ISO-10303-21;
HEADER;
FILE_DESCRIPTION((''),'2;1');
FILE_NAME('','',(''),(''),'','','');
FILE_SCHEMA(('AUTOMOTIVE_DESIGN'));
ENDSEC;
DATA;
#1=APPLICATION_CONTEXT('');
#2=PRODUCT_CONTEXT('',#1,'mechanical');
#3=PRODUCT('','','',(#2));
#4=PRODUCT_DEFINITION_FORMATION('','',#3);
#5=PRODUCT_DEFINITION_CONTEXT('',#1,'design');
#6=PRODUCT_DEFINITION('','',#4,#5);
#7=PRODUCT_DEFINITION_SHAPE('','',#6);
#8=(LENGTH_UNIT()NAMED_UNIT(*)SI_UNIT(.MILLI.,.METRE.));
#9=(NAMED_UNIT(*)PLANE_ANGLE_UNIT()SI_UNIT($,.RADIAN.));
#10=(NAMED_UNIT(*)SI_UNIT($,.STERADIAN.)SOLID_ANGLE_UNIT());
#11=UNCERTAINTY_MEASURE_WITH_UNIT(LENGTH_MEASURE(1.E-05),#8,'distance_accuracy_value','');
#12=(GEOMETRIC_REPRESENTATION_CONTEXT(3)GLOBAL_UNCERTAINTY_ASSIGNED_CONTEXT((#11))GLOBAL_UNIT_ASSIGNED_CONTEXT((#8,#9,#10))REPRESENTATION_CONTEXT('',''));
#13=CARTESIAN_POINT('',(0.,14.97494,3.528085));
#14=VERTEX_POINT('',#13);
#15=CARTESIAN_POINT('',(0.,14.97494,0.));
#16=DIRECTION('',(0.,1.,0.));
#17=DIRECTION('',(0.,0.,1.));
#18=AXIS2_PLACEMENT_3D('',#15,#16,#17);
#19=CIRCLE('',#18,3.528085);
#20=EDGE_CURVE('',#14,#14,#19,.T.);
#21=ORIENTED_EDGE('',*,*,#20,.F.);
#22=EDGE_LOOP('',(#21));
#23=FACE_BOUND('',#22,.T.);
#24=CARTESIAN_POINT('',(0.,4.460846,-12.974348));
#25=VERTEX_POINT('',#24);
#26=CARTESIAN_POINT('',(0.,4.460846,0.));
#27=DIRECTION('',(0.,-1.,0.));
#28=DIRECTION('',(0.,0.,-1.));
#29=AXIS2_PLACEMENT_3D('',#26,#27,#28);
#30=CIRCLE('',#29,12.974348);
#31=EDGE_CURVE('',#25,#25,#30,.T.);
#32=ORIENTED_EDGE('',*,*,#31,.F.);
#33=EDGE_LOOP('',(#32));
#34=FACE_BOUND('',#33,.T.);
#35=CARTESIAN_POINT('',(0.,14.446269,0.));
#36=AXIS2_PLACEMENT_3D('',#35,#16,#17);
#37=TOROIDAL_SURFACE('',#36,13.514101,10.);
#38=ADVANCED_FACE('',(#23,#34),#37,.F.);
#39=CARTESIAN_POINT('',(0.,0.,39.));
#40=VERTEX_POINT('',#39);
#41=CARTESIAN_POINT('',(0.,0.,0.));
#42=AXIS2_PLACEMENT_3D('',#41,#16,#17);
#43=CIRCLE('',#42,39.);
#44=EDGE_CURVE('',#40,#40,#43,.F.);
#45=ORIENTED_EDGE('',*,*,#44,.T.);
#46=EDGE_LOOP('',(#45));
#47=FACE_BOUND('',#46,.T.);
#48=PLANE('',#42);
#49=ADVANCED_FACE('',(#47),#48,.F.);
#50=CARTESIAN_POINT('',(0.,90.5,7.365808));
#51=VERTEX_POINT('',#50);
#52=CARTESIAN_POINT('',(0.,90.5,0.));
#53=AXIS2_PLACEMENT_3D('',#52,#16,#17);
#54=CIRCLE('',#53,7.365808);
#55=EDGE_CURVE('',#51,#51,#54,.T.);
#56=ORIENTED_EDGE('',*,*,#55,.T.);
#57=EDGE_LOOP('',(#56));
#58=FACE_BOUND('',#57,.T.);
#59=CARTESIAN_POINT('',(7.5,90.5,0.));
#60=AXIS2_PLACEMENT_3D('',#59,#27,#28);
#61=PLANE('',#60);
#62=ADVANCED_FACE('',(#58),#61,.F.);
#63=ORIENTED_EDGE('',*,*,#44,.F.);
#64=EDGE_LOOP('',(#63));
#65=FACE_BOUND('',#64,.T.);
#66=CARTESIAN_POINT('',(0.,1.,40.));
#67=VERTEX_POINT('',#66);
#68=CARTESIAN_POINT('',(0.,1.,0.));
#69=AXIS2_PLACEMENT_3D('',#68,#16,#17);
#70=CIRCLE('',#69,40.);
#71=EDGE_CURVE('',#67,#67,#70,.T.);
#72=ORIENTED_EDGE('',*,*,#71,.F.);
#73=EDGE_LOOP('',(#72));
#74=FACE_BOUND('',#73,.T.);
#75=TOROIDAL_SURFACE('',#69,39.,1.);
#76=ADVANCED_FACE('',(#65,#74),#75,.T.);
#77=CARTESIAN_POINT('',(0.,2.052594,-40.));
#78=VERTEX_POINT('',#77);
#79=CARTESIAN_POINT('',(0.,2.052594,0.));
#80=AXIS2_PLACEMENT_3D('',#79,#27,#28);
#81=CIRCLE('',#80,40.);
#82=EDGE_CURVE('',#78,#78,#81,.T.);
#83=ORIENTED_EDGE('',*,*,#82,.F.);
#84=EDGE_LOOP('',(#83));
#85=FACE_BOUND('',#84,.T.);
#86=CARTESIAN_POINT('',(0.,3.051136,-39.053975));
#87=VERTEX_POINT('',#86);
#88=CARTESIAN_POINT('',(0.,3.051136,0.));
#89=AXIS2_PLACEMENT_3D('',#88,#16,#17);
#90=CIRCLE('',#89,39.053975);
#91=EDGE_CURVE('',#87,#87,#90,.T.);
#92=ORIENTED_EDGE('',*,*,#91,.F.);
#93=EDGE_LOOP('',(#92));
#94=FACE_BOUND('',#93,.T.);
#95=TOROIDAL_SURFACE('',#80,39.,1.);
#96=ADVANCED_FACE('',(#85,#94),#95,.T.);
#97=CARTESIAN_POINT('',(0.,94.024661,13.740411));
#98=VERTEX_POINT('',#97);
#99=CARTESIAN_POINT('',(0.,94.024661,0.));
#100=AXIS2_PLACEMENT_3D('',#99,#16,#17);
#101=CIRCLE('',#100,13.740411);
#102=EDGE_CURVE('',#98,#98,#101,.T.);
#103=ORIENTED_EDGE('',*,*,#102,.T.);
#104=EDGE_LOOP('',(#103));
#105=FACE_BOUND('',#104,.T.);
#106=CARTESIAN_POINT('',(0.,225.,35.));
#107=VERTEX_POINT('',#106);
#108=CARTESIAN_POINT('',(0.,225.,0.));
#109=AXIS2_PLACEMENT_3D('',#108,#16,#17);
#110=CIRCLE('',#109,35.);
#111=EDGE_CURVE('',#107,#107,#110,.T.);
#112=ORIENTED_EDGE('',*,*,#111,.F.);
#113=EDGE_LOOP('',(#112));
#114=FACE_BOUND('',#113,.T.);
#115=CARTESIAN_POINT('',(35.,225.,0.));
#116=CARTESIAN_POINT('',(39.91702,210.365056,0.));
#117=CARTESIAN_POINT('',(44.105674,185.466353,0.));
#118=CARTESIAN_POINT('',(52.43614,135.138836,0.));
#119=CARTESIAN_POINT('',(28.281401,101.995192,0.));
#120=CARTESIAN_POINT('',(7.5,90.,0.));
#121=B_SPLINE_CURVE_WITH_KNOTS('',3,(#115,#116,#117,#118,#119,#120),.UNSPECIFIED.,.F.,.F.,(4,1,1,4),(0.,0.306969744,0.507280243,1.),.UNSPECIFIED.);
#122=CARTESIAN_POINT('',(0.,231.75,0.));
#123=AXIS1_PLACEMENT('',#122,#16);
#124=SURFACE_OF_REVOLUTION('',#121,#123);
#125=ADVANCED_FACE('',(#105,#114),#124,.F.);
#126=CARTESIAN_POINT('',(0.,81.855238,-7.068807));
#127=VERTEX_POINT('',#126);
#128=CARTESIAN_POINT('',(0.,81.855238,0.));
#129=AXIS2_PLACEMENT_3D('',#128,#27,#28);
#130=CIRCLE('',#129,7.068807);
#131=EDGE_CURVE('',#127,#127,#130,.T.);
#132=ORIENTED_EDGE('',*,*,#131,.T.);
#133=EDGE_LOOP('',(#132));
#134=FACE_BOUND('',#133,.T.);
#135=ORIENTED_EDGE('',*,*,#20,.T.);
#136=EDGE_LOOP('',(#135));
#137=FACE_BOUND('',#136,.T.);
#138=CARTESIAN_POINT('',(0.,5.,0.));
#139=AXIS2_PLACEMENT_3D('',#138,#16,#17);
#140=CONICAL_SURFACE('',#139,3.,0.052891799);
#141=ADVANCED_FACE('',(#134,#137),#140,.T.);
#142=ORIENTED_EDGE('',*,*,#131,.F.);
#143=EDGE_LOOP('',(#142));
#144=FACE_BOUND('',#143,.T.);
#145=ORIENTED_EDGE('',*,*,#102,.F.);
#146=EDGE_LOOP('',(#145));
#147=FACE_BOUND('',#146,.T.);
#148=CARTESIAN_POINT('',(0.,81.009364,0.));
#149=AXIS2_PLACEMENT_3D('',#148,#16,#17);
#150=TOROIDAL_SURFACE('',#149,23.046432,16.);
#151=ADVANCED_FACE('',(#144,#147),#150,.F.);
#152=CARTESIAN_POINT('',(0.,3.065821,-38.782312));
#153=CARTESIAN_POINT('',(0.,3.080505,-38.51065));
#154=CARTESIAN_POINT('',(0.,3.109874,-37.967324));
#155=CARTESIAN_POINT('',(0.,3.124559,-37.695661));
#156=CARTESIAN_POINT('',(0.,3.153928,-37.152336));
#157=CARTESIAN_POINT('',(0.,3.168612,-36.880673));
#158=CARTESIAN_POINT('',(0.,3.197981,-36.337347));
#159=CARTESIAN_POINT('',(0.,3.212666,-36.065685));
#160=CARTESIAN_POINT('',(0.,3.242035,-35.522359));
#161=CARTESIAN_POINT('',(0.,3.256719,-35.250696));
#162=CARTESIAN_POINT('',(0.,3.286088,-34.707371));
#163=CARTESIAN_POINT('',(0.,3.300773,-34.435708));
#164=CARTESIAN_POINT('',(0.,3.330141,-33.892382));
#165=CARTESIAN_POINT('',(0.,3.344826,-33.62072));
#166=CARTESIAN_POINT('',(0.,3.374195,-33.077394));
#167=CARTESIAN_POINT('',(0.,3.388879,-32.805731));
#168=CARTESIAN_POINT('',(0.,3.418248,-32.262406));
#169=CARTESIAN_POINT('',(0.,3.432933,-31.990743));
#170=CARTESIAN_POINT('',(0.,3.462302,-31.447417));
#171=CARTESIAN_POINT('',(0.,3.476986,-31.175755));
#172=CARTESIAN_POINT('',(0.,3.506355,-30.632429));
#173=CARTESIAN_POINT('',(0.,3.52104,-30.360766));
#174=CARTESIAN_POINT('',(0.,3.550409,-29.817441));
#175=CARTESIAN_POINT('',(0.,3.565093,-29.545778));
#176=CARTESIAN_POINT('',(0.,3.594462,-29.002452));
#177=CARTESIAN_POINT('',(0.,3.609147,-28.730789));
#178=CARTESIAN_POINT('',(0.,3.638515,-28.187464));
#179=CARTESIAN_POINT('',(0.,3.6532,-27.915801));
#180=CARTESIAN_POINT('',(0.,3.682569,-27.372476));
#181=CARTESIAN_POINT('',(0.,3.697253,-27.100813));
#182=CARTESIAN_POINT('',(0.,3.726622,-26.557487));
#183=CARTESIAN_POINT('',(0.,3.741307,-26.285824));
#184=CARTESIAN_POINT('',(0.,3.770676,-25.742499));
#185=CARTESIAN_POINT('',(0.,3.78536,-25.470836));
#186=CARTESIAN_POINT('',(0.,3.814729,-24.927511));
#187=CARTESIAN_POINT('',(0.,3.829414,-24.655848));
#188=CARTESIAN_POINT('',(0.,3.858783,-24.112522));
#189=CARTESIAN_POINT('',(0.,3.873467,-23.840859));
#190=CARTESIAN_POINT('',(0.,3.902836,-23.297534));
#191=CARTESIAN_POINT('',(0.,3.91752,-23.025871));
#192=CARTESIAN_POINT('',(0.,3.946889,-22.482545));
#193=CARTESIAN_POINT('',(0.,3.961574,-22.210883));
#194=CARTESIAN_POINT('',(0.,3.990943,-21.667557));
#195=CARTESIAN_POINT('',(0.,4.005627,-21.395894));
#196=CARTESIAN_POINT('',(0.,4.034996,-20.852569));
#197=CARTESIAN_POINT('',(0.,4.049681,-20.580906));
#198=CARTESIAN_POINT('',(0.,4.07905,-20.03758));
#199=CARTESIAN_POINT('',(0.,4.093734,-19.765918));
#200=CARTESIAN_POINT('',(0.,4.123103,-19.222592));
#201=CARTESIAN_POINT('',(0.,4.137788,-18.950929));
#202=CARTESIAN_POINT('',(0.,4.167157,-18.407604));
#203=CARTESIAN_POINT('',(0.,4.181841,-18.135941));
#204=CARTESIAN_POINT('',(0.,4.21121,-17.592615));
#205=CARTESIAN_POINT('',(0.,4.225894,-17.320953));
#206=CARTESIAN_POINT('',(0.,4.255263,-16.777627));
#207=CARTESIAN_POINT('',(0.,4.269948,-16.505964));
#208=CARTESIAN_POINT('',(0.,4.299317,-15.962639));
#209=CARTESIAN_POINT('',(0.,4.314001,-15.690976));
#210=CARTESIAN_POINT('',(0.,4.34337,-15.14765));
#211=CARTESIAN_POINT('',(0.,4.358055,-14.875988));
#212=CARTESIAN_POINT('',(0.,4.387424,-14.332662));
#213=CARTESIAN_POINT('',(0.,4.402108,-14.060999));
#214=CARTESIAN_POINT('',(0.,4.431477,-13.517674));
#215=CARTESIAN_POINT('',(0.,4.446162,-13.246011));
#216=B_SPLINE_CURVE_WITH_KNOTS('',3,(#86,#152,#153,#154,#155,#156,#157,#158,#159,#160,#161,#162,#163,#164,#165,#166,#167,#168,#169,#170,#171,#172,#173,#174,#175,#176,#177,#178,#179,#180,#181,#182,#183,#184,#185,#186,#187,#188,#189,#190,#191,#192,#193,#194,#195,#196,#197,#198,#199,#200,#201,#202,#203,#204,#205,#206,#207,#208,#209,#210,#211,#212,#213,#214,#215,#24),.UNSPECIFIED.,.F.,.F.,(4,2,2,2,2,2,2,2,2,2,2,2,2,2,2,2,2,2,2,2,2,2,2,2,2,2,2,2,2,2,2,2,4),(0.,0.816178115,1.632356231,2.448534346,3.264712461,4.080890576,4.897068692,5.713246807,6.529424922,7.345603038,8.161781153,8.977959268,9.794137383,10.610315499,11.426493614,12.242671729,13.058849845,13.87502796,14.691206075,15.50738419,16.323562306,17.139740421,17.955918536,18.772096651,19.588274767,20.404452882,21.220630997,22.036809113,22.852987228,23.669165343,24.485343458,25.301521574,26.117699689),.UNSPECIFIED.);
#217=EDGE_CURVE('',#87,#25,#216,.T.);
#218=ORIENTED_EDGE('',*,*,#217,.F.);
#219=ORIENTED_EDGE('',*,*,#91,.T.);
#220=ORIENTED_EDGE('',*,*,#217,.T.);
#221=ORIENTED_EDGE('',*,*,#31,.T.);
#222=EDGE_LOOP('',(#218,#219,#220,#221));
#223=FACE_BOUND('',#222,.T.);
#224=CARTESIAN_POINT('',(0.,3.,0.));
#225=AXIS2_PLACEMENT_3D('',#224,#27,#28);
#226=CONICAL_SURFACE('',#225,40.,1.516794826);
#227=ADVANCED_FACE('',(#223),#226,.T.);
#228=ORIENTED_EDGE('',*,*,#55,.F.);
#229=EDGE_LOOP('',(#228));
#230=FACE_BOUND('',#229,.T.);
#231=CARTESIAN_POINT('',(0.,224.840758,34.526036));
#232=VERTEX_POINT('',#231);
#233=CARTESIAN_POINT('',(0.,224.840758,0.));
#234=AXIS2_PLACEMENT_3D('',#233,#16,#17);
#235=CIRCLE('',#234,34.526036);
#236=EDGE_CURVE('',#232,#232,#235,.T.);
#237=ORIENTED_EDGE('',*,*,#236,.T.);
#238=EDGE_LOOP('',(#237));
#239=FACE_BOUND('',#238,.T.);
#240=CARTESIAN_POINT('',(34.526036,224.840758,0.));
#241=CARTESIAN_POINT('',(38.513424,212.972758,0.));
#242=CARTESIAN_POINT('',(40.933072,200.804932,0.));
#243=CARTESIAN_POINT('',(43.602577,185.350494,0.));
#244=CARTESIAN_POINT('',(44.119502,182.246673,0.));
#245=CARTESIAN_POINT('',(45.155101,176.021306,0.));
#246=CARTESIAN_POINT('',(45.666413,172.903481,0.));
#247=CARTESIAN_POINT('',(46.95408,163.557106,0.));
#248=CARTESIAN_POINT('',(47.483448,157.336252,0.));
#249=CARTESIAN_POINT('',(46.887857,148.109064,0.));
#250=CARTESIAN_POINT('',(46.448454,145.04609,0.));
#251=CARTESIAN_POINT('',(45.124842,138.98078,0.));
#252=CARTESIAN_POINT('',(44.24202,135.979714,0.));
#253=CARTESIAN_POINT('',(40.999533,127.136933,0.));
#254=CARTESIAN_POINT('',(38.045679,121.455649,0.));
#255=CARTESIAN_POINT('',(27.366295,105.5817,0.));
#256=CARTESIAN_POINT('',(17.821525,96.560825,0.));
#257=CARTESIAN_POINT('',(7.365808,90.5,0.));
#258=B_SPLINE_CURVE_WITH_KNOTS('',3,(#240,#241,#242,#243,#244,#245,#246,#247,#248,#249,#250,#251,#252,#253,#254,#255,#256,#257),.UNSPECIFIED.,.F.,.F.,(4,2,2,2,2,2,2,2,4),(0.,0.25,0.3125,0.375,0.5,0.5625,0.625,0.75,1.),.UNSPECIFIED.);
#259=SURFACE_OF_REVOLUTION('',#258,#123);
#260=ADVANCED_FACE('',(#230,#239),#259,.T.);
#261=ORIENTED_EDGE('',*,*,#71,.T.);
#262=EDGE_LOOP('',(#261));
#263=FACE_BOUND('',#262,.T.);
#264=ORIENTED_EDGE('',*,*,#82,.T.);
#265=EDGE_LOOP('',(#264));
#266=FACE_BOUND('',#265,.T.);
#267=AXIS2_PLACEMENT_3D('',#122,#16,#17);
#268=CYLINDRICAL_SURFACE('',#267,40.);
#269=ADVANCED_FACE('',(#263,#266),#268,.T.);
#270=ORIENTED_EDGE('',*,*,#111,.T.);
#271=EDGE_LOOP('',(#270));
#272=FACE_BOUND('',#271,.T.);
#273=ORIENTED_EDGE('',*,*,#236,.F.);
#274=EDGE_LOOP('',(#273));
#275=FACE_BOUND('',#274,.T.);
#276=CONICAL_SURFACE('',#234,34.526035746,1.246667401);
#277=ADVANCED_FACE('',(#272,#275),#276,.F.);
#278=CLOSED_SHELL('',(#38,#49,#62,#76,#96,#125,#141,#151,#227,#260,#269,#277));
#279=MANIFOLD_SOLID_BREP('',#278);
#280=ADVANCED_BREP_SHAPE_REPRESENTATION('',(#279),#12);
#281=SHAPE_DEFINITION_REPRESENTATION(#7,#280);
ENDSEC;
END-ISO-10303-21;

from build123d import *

# Parameters (mm, degrees)
REVOLVE_THIN1_OUTLINE_W   = 7.365807556
REVOLVE_THIN1_OUTLINE_H   = 0.5
REVOLVE_THIN1_OUTLINE_W_2 = 0.134192444
FILLET1_R                 = 10
FILLET2_R                 = 16
FILLET3_R                 = 1


# Read off the part's stored shape, not the designer's step: Revolve-Thin1
with BuildPart() as part:
    # Revolve-Thin1 outline → Revolve-Thin1 (revolve)
    with BuildSketch(Plane.XY):
        with Locations((3.682903778, 90.25)):
            Rectangle(REVOLVE_THIN1_OUTLINE_W, REVOLVE_THIN1_OUTLINE_H)
        with BuildLine():
            add(Edge.make_bspline(
                [(7.5, 90.577978433), (7.455285949, 90.551931479), (7.410555095, 90.525938631), (7.365807556, 90.5)],
                knots=[0.99893007, 0.99893007, 0.99893007, 0.99893007, 1, 1, 1, 1], degree=3))
            Line((7.365807556, 90.5), (7.5, 90.5))
            Line((7.5, 90.5), (7.5, 90.577978433))
        make_face()
        with Locations((7.432903778, 90.25)):
            Rectangle(REVOLVE_THIN1_OUTLINE_W_2, REVOLVE_THIN1_OUTLINE_H)
        with BuildLine():
            add(Edge.make_bspline(
                [(34.526035746, 116.224068176), (34.512660612, 116.204150697), (34.499276892, 116.184238728), (27.396765127, 105.626990517), (17.903178429, 96.638067113), (7.5, 90.577978433)],
                knots=[0.749529738, 0.749529738, 0.749529738, 0.749529738, 0.75, 0.75, 0.99893007, 0.99893007, 0.99893007, 0.99893007], degree=3))
            Line((7.5, 90.577978433), (7.5, 90.5))
            Line((7.5, 90.5), (8.352912818, 90.5))
            add(Edge.make_bspline(
                [(34.526035746, 115.332949182), (27.575400822, 105.173919249), (18.409466047, 96.486433496), (8.352912818, 90.5)],
                knots=[0.753639532, 0.753639532, 0.753639532, 0.753639532, 0.993242921, 0.993242921, 0.993242921, 0.993242921], degree=3))
            Line((34.526035746, 115.332949182), (34.526035746, 116.224068176))
        make_face()
        with BuildLine():
            Line((8.352912818, 90.5), (7.5, 90.5))
            Line((7.5, 90.5), (7.5, 90))
            add(Edge.make_bspline(
                [(8.352912818, 90.5), (8.069306953, 90.331175989), (7.784992776, 90.16450013), (7.5, 90)],
                knots=[0.993242921, 0.993242921, 0.993242921, 0.993242921, 1, 1, 1, 1], degree=3))
        make_face()
        with BuildLine():
            add(Edge.make_bspline(
                [(35, 116.937654659), (34.843239639, 116.699022317), (34.685245979, 116.461154885), (34.526035746, 116.224068176)],
                knots=[0.743931995, 0.743931995, 0.743931995, 0.743931995, 0.749529738, 0.749529738, 0.749529738, 0.749529738], degree=3))
            Line((34.526035746, 116.224068176), (34.526035746, 115.332949182))
            add(Edge.make_bspline(
                [(35, 116.033110225), (34.843184029, 115.798961501), (34.685190644, 115.565569566), (34.526035746, 115.332949182)],
                knots=[0.748153119, 0.748153119, 0.748153119, 0.748153119, 0.753639532, 0.753639532, 0.753639532, 0.753639532], degree=3))
            Line((35, 116.033110225), (35, 116.937654659))
        make_face()
        with BuildLine():
            add(Edge.make_bspline(
                [(35, 223.406176232), (38.707754789, 211.992882418), (41.019034398, 200.307274966), (43.602577081, 185.350494264), (44.119501526, 182.246673107), (45.155101131, 176.021305771), (45.666413266, 172.90348054), (46.954080187, 163.557105891), (47.483447687, 157.336251858), (46.887857201, 148.10906378), (46.448454036, 145.046089868), (45.124841561, 138.98077957), (44.242019923, 135.979713916), (41.104468819, 127.423109067), (38.330596439, 122.007737575), (35, 116.937654659)],
                knots=[0.010062995, 0.010062995, 0.010062995, 0.010062995, 0.25, 0.25, 0.3125, 0.3125, 0.375, 0.375, 0.5, 0.5, 0.5625, 0.5625, 0.625, 0.625, 0.743931995, 0.743931995, 0.743931995, 0.743931995], degree=3))
            Line((35, 116.937654659), (35, 116.033110225))
            add(Edge.make_bspline(
                [(47.720690898, 155.470930382), (47.720690902, 153.643424155), (47.202796244, 139.839119187), (41.88477425, 126.313065149), (35, 116.033110225)],
                knots=[0.470604099, 0.470604099, 0.470604099, 0.470604099, 0.507280243, 0.748153119, 0.748153119, 0.748153119, 0.748153119], degree=3))
            add(Edge.make_bspline(
                [(35.053402076, 224.840758405), (39.935404776, 210.255770266), (43.812104428, 187.210591777), (47.720690877, 163.624535777), (47.720690898, 155.470930382)],
                knots=[0.001113252, 0.001113252, 0.001113252, 0.001113252, 0.306969744, 0.470604099, 0.470604099, 0.470604099, 0.470604099], degree=3))
            Line((35.053402076, 224.840758405), (35, 224.840758405))
            Line((35, 224.840758405), (35, 223.406176232))
        make_face()
        with BuildLine():
            Line((35, 224.840758405), (34.526035746, 224.840758405))
            add(Edge.make_bspline(
                [(34.526035746, 224.840758405), (34.68653601, 224.363047867), (34.844496189, 223.884851546), (35, 223.406176232)],
                knots=[0, 0, 0, 0, 0.010062995, 0.010062995, 0.010062995, 0.010062995], degree=3))
            Line((35, 223.406176232), (35, 224.840758405))
        make_face()
        Polygon((35, 225), (34.526035746, 224.840758405), (35, 224.840758405), align=None)
        with BuildLine():
            add(Edge.make_bspline(
                [(35, 225), (35.017831987, 224.946925146), (35.035632641, 224.893844612), (35.053402076, 224.840758405)],
                knots=[0, 0, 0, 0, 0.001113252, 0.001113252, 0.001113252, 0.001113252], degree=3))
            Line((35, 225), (35, 224.840758405))
            Line((35, 224.840758405), (35.053402076, 224.840758405))
        make_face()
    revolve(axis=Axis((0, 0, 0), (0, 1, 0)))

    # Sketch2 → Revolve1 (revolve)
    with BuildSketch(Plane.XY, mode=Mode.PRIVATE) as revolve1_sk:
        Polygon((0, 90), (0, 0), (40, 0), (40, 3), (3, 5), (7.5, 90), align=None)
    revolve(revolve1_sk.sketch.rotate(Axis((0, 231.75, 0), (0, -1, 0)), 90), axis=Axis((0, 231.75, 0), (0, -1, 0)))

    # Fillet1
    fillet1_edges = [part.edges().sort_by_distance(p)[0] for p in [
        (0, 5, -3),
    ]]
    fillet(fillet1_edges, radius=FILLET1_R)

    # Fillet2
    fillet2_edges = [part.edges().sort_by_distance(p)[0] for p in [
        (-5.303300859, 90, -5.303300859),
    ]]
    fillet(fillet2_edges, radius=FILLET2_R)

    # Fillet3
    fillet3_edges = [part.edges().sort_by_distance(p)[0] for p in [
        (0, 0, -40),
        (0, 3, -40),
    ]]
    fillet(fillet3_edges, radius=FILLET3_R)


solid = part.part
